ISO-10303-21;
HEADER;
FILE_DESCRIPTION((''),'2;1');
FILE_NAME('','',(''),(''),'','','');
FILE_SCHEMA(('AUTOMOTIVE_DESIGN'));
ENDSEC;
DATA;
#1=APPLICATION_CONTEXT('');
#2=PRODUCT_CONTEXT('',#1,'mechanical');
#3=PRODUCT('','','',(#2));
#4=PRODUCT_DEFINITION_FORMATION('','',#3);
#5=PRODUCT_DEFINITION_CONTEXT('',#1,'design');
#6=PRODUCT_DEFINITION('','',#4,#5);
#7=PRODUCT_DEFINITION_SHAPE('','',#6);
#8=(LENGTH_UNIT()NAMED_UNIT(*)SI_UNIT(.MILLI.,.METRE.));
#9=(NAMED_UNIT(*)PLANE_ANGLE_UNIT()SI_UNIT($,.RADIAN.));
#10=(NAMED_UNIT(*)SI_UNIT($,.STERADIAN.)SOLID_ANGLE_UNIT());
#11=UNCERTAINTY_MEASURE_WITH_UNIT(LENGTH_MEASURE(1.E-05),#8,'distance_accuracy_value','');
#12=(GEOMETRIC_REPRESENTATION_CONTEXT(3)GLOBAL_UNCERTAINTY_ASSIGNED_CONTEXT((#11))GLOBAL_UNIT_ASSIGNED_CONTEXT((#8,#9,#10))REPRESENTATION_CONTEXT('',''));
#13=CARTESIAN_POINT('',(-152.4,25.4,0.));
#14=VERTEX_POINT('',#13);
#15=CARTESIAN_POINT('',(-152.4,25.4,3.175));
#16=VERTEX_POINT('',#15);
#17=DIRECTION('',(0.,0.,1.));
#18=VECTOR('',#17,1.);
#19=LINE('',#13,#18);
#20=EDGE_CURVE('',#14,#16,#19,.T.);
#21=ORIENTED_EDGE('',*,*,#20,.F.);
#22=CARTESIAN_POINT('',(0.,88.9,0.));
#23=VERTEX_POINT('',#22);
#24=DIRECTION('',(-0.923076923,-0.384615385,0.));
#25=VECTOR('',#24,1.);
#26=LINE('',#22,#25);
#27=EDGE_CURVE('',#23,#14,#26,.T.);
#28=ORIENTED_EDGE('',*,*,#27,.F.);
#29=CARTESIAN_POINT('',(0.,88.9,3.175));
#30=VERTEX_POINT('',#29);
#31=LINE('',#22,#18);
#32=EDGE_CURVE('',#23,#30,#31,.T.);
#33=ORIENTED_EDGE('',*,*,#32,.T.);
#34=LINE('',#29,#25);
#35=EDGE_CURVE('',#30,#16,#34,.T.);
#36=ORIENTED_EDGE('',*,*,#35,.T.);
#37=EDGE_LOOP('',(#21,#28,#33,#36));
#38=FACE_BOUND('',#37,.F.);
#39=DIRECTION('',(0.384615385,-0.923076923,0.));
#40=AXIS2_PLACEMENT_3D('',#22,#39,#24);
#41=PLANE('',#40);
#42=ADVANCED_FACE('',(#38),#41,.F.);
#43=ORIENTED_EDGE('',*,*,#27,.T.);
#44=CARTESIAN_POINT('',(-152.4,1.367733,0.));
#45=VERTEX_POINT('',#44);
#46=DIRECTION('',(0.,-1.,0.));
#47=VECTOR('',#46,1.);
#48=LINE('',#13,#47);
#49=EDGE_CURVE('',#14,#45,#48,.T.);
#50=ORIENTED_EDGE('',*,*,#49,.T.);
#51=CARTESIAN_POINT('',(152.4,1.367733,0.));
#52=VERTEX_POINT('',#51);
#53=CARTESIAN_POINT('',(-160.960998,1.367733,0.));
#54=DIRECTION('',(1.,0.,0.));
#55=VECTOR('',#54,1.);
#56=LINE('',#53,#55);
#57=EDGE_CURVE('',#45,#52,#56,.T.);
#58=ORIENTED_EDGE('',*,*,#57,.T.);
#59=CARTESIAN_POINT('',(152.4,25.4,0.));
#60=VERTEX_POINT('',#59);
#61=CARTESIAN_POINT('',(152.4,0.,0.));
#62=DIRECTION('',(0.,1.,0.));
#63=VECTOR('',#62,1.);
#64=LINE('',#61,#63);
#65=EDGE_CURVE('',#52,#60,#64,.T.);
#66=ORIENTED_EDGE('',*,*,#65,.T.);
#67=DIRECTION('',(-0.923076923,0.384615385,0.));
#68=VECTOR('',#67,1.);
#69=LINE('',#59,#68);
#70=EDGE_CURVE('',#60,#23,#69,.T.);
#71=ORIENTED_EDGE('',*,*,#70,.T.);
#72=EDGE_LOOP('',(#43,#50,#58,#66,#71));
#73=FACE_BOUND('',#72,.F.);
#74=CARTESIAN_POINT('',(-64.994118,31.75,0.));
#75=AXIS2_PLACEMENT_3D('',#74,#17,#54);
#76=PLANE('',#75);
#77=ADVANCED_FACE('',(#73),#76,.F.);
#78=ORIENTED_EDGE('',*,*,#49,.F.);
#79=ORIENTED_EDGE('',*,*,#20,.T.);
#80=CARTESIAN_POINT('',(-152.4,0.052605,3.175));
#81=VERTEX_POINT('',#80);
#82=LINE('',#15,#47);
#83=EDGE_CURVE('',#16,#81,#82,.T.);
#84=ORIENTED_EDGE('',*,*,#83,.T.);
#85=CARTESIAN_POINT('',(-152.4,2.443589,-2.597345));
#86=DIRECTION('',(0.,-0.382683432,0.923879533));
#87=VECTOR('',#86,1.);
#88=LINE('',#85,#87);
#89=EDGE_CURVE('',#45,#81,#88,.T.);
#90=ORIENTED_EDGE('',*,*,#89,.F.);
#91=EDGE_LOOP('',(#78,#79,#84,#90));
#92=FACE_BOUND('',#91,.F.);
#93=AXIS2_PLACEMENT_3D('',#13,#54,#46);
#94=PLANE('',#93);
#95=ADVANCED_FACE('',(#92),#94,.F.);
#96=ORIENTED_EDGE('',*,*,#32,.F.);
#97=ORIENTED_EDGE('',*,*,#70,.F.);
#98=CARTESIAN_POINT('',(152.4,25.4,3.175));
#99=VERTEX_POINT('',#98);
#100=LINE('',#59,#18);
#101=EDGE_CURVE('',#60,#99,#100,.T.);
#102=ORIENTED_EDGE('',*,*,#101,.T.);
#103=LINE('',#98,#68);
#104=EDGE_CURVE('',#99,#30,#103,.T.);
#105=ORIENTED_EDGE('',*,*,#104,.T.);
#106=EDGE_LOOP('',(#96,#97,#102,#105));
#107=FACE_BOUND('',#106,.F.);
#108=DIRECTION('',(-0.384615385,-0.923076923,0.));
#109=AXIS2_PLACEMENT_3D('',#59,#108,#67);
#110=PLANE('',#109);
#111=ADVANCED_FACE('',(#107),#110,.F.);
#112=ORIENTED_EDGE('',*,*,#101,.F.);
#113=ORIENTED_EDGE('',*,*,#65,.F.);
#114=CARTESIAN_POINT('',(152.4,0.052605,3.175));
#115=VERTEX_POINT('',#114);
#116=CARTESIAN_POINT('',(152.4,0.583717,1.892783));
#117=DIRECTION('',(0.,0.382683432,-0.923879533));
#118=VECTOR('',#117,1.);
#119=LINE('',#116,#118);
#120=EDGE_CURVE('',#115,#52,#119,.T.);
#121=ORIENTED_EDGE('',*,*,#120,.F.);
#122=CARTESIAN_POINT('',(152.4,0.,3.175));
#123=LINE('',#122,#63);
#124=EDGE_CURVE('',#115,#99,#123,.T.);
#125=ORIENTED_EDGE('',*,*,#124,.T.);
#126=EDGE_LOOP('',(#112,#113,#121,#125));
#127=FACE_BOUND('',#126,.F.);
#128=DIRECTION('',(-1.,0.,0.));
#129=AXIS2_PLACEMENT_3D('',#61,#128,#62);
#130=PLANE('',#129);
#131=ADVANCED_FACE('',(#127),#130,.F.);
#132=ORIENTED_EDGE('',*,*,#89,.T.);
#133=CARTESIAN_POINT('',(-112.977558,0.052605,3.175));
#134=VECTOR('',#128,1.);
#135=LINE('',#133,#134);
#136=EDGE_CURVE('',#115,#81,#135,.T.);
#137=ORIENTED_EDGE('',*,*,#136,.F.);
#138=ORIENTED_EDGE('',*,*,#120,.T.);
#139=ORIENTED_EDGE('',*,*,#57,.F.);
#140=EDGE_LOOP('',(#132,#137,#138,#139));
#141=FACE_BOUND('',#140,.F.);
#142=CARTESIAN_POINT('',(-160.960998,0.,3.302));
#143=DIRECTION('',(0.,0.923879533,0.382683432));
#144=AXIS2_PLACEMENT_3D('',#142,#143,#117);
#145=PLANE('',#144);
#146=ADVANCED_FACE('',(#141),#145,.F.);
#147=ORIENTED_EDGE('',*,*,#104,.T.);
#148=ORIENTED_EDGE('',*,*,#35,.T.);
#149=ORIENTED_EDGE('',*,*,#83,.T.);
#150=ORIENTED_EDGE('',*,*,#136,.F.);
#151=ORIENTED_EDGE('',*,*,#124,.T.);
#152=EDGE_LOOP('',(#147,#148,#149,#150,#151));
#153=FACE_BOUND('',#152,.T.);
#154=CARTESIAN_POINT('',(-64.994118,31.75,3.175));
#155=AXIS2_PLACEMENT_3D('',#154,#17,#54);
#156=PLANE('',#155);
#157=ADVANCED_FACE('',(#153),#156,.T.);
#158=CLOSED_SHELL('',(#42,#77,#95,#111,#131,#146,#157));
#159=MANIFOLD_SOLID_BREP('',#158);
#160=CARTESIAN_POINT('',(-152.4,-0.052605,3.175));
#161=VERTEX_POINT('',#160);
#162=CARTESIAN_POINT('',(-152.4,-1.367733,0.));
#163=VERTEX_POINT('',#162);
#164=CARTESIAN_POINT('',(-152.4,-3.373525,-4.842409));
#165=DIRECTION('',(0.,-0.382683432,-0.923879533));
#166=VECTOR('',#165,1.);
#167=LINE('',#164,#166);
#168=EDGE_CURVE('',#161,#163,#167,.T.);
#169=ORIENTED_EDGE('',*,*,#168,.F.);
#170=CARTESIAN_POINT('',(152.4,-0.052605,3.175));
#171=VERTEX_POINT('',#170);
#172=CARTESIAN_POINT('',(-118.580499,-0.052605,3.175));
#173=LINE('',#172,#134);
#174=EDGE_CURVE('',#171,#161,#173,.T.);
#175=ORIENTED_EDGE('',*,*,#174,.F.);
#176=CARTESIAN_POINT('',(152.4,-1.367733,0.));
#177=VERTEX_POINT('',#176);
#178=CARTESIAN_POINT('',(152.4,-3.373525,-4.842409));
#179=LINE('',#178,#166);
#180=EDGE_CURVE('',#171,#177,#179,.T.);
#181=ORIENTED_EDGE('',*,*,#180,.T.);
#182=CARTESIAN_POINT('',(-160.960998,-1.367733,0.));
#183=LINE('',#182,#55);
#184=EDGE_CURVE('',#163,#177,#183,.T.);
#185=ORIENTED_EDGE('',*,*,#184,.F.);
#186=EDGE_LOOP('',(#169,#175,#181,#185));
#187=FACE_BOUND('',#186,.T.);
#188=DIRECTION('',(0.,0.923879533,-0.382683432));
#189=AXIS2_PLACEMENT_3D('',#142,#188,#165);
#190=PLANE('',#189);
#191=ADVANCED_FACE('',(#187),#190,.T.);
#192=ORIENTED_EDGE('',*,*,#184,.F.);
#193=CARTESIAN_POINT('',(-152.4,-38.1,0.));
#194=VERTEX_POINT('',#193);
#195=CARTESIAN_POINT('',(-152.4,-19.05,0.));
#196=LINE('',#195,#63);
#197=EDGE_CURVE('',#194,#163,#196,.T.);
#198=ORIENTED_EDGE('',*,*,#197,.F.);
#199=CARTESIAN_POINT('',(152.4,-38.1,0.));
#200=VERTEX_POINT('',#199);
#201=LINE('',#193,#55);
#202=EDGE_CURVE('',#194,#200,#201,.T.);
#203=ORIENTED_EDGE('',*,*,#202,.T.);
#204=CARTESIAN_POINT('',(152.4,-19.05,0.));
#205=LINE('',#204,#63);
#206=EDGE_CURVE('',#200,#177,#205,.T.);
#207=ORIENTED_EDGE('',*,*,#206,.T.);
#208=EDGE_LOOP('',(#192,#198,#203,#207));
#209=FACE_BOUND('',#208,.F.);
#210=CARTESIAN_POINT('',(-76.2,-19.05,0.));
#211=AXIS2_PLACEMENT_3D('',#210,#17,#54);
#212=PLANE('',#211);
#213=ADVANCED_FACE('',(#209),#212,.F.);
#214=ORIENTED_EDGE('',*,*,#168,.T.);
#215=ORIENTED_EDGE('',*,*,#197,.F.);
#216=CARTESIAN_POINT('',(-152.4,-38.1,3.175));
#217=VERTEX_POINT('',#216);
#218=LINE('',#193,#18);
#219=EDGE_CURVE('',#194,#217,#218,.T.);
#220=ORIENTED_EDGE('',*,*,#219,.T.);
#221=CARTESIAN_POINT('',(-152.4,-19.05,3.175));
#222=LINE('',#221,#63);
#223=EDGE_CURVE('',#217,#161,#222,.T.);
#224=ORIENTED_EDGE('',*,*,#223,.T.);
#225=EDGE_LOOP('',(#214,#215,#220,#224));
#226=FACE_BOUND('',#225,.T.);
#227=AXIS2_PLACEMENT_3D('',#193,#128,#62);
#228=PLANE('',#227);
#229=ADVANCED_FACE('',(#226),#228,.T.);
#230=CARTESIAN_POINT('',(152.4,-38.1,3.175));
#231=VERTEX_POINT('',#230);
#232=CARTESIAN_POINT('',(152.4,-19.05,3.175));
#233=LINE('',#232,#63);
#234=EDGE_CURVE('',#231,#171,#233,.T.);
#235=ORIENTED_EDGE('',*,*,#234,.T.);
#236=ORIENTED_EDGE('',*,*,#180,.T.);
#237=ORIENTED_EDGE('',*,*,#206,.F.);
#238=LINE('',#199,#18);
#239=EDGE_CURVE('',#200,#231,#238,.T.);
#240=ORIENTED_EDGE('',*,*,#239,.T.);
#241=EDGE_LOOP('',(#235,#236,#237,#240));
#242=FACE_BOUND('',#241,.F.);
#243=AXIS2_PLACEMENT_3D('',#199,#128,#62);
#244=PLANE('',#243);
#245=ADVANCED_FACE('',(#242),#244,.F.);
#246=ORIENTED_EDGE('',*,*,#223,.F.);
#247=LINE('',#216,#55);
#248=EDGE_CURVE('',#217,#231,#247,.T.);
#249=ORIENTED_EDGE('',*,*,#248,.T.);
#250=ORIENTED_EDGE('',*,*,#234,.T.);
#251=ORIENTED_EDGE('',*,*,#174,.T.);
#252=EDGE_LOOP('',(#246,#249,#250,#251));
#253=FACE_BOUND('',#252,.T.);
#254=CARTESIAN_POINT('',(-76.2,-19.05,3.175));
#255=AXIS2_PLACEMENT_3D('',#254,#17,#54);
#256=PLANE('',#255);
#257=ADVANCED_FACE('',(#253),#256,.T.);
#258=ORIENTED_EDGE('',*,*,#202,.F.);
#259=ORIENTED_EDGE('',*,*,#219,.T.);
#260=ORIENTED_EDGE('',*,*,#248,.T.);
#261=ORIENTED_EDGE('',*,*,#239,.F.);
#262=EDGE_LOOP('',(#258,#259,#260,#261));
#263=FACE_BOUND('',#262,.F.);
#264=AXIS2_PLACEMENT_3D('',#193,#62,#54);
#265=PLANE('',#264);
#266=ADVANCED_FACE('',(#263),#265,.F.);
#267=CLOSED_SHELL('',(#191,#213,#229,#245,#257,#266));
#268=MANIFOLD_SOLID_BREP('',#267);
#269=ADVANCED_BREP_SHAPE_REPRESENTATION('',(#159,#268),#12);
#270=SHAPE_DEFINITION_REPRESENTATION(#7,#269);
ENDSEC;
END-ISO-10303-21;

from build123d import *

# Parameters (mm, degrees)
F1_DEPTH    = 3.175
F0_W        = 152.4
F0_H        = 38.1
F2_DEPTH    = 3.175
F3_T1_DEPTH = 321.9219952748
F4_T1_DEPTH = 321.9219952748


# Not quite as in the source:
# - a fillet or chamfer that OpenCascade refuses, or shapes differently, is made with other operations: its cross-section is extruded or revolved along the edge and cut away or added


with BuildPart() as f1:
    # F0 (on Top) → F1 (new body)
    with BuildSketch(Plane.XY):
        Polygon((-152.4, 25.4), (-152.4, 0), (0, 0), (0, 88.9), align=None)
        Polygon((0, 88.9), (0, 0), (152.4, 0), (152.4, 25.4), align=None)
    extrude(amount=F1_DEPTH)

    # F3: chamfer of 3.302 x 1.367733183 on 1 edges, made by hand

    # F3_s2 → F3_t1 (cut)
    with BuildSketch(Plane.YZ.offset(-160.9609976374)):
        Polygon((0, 3.302), (1.367733183, 0), (0, 0), align=None)
    extrude(amount=F3_T1_DEPTH, mode=Mode.SUBTRACT)


with BuildPart() as f2:
    # F0 (on Top) → F2 (new body)
    with BuildSketch(Plane.XY):
        with Locations((-76.2, -19.05)):
            Rectangle(F0_W, F0_H)
        with Locations((76.2, -19.05)):
            Rectangle(F0_W, F0_H)
    extrude(amount=F2_DEPTH)

    # F4: chamfer of 3.302 x 1.367733183 on 1 edges, made by hand

    # F4_s2 → F4_t1 (cut)
    with BuildSketch(Plane.YZ.offset(-160.9609976374)):
        Polygon((0, 3.302), (-1.367733183, 0), (0, 0), align=None)
    extrude(amount=F4_T1_DEPTH, mode=Mode.SUBTRACT)


solid = Compound([f1.part, f2.part])
